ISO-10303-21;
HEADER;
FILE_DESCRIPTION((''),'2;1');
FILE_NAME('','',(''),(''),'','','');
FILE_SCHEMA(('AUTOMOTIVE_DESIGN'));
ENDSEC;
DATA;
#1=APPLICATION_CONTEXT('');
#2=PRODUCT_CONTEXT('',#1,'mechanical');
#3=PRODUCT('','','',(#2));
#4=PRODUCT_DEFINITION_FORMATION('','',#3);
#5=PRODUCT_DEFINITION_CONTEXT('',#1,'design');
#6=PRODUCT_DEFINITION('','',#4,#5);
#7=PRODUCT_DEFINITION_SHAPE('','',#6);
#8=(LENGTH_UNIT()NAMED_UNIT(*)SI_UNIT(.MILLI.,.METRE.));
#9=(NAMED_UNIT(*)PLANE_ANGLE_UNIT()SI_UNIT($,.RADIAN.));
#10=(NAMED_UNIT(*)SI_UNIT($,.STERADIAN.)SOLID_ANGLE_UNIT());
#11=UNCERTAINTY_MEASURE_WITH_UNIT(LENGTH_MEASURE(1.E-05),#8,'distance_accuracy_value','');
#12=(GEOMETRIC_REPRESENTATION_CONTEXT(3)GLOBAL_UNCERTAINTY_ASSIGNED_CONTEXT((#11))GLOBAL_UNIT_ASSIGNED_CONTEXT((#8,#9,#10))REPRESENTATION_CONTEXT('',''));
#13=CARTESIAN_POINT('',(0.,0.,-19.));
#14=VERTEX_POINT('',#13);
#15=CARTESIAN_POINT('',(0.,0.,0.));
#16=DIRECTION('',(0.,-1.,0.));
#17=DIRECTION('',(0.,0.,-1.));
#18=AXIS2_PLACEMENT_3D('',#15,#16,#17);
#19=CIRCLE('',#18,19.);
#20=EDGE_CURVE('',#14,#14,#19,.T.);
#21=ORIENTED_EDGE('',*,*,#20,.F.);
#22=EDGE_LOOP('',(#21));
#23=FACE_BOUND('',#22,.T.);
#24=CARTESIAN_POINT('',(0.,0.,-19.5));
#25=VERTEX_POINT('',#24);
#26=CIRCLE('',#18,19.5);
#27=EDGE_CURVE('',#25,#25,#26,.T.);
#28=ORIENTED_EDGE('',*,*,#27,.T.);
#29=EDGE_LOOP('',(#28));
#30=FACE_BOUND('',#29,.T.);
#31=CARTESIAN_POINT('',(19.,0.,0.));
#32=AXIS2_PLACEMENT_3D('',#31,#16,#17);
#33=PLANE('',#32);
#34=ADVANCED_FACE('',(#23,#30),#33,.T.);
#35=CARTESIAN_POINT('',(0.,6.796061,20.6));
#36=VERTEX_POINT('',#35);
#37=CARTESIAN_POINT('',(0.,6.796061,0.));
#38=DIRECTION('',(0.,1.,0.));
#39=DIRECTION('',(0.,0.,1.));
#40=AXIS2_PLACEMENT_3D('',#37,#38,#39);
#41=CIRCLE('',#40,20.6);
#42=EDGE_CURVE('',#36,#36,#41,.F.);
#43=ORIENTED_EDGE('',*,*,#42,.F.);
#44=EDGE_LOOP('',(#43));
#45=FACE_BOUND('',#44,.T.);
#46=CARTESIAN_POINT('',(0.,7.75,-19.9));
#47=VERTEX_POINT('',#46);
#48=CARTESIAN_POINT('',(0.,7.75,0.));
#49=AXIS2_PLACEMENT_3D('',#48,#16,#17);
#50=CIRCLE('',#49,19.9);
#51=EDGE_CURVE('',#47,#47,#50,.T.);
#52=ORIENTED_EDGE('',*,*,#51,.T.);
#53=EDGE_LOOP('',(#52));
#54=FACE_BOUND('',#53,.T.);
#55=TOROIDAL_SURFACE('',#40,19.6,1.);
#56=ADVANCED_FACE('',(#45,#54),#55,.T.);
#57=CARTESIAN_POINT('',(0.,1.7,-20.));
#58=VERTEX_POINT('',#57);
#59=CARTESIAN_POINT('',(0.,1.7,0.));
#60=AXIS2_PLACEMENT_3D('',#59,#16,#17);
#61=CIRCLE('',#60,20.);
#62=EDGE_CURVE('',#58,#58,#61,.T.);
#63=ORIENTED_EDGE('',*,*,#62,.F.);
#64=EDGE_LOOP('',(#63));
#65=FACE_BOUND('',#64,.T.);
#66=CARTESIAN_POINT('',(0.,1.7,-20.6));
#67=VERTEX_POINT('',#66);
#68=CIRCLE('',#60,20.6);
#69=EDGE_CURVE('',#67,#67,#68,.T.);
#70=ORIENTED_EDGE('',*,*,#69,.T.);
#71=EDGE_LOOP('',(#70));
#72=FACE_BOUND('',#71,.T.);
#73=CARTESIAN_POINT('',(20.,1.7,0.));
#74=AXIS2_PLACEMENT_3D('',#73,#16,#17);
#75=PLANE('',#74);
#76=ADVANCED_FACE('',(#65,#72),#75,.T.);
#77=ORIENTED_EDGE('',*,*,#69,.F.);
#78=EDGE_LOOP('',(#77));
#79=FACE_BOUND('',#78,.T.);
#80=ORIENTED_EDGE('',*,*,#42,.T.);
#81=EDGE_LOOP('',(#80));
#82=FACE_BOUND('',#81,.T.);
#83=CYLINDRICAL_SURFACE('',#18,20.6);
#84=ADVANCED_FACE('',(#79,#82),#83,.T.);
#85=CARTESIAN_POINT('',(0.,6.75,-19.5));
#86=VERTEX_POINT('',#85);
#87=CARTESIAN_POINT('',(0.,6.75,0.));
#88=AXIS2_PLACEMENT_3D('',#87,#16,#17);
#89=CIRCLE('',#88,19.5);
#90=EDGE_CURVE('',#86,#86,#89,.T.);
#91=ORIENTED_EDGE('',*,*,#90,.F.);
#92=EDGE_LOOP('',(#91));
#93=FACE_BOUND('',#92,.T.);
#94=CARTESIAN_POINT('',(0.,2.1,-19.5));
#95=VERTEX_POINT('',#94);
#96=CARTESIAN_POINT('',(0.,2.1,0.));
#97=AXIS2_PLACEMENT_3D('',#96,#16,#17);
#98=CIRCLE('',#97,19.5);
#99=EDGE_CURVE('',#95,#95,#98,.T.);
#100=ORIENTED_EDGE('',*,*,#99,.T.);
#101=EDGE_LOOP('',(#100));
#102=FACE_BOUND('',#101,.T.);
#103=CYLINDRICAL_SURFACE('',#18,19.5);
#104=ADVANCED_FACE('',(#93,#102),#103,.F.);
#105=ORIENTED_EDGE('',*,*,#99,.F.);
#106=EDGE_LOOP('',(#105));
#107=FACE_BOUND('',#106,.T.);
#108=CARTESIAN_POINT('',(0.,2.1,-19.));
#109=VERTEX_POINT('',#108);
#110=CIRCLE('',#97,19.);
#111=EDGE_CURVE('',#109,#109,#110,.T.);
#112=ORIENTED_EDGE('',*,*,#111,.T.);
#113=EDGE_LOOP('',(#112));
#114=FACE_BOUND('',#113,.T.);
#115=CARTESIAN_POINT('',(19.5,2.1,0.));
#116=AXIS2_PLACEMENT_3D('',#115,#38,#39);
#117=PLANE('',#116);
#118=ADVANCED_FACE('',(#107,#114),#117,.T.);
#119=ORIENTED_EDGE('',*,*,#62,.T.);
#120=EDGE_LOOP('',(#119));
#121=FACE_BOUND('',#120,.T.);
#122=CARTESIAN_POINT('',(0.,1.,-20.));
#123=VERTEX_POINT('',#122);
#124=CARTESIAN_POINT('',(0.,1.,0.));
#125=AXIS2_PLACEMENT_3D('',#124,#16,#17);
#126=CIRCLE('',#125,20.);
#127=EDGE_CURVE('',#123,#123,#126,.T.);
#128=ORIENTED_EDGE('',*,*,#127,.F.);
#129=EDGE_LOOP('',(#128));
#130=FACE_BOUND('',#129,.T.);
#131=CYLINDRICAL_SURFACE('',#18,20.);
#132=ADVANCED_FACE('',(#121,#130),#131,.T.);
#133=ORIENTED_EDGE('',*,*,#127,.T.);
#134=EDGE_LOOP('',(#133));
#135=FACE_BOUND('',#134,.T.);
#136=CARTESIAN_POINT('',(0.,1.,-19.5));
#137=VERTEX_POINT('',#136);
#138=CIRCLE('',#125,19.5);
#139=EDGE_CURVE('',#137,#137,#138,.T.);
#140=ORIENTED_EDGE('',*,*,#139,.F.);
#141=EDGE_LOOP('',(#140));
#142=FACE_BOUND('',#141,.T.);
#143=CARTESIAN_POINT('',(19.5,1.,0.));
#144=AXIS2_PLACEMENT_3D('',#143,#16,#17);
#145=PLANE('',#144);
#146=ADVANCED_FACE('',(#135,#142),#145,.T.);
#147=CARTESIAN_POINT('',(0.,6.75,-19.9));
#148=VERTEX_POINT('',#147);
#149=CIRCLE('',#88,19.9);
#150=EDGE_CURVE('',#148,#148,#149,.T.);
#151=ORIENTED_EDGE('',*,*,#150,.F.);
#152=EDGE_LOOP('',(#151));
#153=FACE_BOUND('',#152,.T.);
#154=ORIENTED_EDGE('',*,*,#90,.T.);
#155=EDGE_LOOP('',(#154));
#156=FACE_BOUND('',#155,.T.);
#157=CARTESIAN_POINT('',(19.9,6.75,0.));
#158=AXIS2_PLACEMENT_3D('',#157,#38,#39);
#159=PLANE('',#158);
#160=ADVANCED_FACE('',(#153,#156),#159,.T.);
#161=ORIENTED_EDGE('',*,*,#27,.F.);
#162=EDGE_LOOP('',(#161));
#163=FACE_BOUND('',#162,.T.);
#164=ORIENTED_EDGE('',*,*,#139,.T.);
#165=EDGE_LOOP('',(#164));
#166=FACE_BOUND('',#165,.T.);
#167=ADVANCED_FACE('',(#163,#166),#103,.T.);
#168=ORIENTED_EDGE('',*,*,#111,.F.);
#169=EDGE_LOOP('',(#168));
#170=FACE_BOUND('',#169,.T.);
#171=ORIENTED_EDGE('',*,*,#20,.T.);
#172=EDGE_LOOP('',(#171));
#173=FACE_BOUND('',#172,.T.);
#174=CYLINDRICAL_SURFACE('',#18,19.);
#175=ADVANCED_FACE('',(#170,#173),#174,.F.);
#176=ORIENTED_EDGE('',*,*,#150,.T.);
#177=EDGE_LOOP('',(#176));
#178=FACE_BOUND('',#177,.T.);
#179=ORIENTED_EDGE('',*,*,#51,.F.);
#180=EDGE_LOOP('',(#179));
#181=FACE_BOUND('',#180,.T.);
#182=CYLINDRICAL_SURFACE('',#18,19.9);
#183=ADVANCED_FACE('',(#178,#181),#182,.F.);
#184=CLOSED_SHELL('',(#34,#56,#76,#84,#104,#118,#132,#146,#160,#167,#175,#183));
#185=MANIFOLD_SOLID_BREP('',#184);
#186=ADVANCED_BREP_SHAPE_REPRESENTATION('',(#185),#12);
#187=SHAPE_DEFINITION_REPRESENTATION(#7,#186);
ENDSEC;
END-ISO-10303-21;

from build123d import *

# Parameters (mm, degrees)
CONG_1_R = 1


with BuildPart() as part:
    # Esquisse1 → Révolution1 (revolve)
    with BuildSketch(Plane.XY, mode=Mode.PRIVATE) as r_volution1_sk:
        Polygon((19, 2.1), (19, 0), (19.5, 0), (19.5, 1), (20, 1), (20, 1.7), (20.6, 1.7), (20.6, 7.75), (19.9, 7.75), (19.9, 6.75), (19.5, 6.75), (19.5, 2.1), align=None)
    revolve(r_volution1_sk.sketch.rotate(Axis((0, 0, 0), (0, 1, 0)), 90), axis=Axis((0, 0, 0), (0, 1, 0)))

    # Congé1
    # the kernel refuses this fillet: 1 mm, written as the material it takes off along each edge
    with BuildSketch(Plane(origin=(0, 7.75, 0), x_dir=(0, 0, -1), z_dir=(1, 0, 0))) as cong_1_piece_1:
        with BuildLine():
            CenterArc((19.6, -0.953939201), CONG_1_R, 0, 72.542396876)
            Line((19.9, 0), (19.906, 0.019078784))
            ThreePointArc((19.906, 0.019078784), (20.25, 0.02), (20.6, 0.02))
            Line((20.6, 0.02), (20.62, 0))
            Line((20.62, 0), (20.62, -0.953939201))
            Line((20.62, -0.953939201), (20.6, -0.953939201))
        make_face()
    revolve(axis=Axis((0, 7.75, 0), (0, 1, 0)), mode=Mode.SUBTRACT)


solid = part.part
